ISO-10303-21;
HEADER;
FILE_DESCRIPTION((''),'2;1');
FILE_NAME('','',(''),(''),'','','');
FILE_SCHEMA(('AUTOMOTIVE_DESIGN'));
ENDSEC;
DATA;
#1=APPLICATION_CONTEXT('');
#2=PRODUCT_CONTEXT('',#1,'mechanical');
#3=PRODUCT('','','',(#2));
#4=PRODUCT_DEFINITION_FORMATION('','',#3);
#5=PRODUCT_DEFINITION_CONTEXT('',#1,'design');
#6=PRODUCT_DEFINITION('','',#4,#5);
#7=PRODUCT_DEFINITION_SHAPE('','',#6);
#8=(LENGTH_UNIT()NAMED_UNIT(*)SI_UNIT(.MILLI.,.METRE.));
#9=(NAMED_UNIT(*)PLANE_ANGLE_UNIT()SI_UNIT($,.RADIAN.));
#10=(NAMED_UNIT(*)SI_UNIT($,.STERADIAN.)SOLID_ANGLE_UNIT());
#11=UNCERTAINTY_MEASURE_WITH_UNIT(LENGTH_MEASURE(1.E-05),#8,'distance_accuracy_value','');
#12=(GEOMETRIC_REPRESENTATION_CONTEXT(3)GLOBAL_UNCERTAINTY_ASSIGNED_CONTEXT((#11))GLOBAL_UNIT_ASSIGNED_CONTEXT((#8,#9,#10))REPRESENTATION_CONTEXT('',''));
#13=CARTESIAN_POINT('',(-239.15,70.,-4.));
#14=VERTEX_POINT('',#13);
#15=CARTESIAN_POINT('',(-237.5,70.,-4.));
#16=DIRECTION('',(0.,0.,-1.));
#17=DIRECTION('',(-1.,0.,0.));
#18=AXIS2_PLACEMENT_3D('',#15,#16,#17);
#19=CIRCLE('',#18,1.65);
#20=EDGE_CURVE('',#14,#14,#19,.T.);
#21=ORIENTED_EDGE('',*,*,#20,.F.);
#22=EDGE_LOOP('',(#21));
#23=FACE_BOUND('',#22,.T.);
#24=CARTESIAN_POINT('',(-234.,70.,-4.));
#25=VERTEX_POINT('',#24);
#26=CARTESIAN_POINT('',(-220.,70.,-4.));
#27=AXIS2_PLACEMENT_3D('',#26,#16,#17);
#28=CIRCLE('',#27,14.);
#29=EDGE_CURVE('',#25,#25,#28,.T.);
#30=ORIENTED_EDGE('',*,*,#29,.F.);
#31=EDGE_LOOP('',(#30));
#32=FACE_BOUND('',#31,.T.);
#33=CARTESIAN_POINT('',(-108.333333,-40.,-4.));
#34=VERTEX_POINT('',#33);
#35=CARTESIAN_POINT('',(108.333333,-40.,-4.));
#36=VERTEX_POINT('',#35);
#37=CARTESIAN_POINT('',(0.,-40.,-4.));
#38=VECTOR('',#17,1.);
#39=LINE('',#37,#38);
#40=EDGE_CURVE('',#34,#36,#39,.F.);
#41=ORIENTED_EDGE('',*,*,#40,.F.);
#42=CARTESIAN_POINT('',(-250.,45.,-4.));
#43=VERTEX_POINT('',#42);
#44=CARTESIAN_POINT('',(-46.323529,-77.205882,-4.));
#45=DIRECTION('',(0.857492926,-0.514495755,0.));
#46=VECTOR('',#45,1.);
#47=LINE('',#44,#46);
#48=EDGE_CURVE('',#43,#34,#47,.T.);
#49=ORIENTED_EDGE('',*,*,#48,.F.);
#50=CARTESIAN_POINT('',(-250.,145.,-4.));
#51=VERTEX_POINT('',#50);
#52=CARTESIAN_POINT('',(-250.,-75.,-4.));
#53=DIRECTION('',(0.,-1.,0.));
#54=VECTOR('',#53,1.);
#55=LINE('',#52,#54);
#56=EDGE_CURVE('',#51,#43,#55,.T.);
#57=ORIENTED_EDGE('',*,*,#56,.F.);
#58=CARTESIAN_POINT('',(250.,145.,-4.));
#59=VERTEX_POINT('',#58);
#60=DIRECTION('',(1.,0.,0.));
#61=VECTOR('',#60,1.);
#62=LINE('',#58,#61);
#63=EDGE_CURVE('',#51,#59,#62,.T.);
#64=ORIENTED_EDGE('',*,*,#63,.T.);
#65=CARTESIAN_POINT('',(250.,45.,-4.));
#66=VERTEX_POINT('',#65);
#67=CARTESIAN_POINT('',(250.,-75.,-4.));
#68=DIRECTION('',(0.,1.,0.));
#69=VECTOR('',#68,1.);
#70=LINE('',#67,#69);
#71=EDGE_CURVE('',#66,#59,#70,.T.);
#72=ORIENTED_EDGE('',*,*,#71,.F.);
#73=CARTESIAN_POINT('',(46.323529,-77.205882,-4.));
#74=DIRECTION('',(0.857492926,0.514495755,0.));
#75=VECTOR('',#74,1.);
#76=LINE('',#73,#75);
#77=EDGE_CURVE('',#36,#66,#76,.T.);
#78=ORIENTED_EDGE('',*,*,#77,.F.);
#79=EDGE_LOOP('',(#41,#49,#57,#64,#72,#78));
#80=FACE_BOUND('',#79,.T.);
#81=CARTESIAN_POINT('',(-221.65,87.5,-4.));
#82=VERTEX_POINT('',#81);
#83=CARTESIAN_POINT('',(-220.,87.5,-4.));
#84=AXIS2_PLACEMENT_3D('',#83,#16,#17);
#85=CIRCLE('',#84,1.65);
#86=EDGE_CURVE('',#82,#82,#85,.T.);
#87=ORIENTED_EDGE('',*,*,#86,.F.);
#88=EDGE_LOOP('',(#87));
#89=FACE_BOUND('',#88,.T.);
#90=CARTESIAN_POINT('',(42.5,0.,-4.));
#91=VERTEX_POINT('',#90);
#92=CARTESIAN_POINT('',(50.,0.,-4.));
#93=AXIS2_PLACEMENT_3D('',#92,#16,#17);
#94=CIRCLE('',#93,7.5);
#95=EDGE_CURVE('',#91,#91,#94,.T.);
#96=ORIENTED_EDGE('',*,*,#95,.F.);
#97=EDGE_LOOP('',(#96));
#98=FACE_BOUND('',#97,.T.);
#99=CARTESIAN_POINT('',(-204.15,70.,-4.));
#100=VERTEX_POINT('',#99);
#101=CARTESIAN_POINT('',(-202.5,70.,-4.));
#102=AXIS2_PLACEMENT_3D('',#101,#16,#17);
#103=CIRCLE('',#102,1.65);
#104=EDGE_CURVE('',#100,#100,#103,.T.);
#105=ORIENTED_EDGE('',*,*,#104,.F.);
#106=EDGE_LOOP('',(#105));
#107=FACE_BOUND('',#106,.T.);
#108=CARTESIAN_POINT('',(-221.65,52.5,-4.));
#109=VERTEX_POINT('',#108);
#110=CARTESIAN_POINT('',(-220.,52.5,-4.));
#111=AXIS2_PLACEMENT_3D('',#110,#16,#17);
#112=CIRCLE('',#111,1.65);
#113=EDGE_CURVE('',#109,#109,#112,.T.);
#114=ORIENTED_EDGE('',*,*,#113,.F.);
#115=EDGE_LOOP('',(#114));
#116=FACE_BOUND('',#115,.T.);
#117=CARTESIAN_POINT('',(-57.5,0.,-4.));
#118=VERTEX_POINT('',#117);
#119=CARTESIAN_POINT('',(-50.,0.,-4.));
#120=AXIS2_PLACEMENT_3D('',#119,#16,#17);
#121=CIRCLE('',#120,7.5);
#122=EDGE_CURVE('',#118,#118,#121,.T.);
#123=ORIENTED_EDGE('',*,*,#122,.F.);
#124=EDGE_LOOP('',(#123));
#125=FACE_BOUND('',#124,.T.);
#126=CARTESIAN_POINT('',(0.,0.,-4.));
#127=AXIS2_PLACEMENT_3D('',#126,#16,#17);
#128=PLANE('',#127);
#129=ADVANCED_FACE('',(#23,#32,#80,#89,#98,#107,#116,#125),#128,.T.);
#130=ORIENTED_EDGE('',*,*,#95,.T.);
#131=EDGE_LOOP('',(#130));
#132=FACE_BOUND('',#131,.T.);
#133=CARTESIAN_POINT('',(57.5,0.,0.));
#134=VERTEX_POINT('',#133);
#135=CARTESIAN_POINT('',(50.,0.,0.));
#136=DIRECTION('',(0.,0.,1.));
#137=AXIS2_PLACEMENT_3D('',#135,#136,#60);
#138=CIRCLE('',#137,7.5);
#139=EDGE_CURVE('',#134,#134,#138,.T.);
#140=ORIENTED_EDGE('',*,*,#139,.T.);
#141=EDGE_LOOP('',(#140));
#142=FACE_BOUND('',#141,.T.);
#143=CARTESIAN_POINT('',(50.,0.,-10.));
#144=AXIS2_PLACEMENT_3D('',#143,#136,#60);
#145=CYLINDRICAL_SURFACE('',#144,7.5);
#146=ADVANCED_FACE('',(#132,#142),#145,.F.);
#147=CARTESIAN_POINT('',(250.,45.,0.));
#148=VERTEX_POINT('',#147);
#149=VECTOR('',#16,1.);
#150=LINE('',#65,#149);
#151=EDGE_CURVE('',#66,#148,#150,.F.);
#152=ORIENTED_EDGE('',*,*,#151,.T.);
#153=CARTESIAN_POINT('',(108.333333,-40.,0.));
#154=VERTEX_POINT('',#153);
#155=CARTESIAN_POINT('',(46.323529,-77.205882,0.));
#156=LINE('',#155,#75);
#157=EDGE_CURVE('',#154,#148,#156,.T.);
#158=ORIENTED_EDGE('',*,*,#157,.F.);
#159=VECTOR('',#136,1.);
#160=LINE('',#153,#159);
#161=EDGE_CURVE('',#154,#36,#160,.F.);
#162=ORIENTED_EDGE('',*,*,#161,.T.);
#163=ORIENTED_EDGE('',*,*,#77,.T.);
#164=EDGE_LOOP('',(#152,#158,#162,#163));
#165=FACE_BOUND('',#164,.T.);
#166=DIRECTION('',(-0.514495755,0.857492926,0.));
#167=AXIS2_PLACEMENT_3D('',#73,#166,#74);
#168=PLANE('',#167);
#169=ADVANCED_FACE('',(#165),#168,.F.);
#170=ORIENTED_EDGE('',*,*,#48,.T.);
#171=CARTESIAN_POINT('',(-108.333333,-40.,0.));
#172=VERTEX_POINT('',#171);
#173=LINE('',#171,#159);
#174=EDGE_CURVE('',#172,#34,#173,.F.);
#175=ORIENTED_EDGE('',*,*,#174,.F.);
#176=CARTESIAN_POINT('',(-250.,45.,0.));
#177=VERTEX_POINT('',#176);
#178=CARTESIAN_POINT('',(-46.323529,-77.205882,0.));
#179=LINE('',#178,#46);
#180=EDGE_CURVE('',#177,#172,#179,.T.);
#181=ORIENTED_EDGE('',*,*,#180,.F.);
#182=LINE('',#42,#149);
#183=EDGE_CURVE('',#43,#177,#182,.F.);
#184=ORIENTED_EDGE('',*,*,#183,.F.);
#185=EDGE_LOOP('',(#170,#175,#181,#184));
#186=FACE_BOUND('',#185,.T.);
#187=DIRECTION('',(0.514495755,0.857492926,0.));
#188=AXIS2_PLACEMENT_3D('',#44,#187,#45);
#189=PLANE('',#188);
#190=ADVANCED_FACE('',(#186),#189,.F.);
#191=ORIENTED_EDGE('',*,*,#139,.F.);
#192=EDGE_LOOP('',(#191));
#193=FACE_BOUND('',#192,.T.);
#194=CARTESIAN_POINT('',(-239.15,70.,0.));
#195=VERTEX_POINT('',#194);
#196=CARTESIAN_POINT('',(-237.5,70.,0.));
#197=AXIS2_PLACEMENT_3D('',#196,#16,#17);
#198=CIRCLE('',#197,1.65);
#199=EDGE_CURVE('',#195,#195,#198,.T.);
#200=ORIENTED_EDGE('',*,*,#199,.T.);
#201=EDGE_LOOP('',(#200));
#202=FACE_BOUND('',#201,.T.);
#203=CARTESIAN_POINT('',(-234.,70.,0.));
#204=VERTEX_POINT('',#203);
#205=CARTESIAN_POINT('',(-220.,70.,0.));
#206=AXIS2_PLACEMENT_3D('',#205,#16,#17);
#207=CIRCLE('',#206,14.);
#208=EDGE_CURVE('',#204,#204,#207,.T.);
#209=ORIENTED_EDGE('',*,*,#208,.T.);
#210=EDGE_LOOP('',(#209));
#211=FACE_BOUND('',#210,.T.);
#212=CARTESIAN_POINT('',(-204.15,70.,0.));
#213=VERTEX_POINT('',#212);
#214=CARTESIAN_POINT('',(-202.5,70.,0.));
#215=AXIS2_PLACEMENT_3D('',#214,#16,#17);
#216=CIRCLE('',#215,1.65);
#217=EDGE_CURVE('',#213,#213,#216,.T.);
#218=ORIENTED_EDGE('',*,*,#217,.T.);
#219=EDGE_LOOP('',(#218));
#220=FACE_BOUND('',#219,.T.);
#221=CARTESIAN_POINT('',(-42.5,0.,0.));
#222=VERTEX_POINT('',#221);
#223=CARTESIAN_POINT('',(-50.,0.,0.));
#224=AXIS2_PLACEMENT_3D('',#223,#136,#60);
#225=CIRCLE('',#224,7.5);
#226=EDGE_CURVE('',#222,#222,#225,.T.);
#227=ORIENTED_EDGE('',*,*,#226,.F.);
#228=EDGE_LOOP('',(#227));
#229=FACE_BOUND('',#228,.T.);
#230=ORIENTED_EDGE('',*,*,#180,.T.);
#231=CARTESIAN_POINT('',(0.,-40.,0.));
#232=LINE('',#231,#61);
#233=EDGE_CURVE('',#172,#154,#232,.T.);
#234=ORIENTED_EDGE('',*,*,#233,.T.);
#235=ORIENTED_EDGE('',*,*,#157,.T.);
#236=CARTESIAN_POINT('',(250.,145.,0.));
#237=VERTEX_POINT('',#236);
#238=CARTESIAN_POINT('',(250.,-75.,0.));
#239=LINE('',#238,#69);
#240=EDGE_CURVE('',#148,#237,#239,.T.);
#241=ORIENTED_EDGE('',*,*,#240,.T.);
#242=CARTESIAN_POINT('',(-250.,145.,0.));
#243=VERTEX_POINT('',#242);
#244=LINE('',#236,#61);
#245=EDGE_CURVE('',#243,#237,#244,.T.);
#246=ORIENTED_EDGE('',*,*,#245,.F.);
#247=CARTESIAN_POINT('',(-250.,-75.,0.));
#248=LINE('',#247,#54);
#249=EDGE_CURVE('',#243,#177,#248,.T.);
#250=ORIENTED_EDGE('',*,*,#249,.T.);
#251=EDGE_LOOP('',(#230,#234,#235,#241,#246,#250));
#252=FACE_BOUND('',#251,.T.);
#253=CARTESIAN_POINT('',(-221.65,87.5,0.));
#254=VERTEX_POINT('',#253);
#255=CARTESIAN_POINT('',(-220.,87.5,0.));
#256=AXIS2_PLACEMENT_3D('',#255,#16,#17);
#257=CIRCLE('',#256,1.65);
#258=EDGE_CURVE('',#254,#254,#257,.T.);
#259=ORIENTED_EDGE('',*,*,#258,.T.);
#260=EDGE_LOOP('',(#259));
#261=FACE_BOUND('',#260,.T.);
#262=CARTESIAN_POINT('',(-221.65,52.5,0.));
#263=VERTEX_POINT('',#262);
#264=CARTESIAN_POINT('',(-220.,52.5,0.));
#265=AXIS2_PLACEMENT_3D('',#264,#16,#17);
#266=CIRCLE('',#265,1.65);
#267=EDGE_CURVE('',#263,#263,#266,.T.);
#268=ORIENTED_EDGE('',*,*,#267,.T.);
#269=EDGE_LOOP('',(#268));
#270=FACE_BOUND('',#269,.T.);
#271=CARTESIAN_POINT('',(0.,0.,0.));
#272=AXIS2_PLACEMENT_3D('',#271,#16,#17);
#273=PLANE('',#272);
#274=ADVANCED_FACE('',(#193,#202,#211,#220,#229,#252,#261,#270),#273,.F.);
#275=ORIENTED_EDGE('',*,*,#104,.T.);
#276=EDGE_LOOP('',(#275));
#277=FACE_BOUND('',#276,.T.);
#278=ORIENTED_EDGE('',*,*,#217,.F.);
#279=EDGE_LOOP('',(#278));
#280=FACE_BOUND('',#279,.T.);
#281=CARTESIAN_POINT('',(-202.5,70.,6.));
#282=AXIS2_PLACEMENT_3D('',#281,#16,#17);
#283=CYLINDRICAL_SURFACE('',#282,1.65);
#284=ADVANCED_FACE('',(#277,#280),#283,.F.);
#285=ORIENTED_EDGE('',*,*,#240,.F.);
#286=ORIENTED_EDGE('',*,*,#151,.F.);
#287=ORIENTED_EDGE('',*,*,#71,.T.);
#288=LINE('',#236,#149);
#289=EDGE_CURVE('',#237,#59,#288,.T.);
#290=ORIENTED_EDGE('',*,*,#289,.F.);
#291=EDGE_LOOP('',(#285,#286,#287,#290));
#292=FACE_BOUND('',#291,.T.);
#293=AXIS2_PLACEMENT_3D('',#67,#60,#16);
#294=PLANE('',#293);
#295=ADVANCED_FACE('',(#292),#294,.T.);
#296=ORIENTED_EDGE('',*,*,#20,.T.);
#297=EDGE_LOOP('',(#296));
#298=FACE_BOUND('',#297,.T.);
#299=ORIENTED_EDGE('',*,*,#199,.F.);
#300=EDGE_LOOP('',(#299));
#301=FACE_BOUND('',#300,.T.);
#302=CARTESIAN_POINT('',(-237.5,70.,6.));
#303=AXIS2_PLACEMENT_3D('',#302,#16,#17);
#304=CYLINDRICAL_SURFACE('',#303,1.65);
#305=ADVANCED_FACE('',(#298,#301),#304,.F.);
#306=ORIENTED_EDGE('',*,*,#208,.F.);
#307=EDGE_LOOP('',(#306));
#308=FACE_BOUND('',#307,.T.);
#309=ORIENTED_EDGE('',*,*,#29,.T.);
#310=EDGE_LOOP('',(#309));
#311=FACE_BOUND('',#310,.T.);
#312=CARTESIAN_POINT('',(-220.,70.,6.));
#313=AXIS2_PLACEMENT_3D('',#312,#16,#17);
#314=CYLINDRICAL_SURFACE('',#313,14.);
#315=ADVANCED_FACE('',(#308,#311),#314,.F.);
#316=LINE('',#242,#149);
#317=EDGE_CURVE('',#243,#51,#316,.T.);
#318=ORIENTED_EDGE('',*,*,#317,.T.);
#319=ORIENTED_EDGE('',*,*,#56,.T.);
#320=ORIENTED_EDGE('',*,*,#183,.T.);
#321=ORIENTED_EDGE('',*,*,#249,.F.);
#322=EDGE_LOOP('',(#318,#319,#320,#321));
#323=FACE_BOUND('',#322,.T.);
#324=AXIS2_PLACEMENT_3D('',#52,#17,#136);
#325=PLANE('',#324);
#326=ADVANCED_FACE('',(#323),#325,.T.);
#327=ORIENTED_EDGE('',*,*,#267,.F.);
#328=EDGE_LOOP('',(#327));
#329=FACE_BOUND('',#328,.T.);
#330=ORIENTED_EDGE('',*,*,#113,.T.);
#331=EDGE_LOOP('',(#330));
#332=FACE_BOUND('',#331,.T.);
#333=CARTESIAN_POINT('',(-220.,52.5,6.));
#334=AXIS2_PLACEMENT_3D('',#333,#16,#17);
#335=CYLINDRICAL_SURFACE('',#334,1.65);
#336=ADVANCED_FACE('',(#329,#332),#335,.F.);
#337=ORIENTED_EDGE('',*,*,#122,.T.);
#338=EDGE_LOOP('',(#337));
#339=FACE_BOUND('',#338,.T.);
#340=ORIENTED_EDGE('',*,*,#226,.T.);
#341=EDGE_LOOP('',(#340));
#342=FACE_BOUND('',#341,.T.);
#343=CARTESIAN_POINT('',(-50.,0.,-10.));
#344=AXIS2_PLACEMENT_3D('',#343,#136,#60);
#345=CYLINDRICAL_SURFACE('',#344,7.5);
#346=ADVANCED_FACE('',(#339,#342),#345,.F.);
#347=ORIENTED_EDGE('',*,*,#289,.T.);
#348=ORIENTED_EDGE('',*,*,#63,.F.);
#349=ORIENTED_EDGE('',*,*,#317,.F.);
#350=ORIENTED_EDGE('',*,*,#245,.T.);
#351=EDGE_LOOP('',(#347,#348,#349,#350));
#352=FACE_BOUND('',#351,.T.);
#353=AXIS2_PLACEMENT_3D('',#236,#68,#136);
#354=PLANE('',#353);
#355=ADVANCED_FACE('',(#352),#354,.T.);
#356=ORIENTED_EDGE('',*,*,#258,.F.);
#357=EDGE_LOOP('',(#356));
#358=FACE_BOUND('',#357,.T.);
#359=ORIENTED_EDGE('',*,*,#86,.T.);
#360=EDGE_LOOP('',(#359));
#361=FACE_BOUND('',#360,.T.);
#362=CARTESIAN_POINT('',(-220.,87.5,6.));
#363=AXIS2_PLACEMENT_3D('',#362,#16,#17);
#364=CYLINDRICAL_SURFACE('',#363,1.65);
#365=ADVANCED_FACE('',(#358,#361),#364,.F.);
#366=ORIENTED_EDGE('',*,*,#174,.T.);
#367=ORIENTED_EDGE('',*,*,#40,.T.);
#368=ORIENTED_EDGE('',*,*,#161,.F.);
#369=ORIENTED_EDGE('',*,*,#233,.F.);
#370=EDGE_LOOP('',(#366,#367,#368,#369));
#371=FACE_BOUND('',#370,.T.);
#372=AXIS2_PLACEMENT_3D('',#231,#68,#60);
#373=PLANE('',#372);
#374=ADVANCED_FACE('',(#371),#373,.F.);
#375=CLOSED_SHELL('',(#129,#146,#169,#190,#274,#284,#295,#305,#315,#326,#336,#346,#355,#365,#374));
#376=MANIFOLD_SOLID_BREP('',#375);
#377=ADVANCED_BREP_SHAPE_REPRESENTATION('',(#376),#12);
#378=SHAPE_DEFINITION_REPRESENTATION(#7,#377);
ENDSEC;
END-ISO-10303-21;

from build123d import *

# Parameters (mm, degrees)
SKETCH_2_W             = 500
SKETCH_2_H             = 150
SM_BASE_FLANGE_1_DEPTH = 4
SKETCH_7_R             = 7.5
CUT_EXTRUDE_1_DEPTH    = 10
CUT_EXTRUDE_2_DEPTH    = 10
SKETCH_9_W             = 500
SKETCH_9_H             = 70
EXTRUDE_1_DEPTH        = 4
SKETCH_11_W            = 294.318295345
SKETCH_11_H            = 76.206928483
CUT_EXTRUDE_3_DEPTH    = 10
SKETCH_12_R            = 14
CUT_EXTRUDE_4_DEPTH    = 10
SKETCH_13_R            = 1.65
CUT_EXTRUDE_5_DEPTH    = 10


# Sheet-metal steps are written as plain solids
with BuildPart() as part:
    # Sketch 2 → 基体-法兰1 (new body)
    with BuildSketch(Plane.XY):
        Rectangle(SKETCH_2_W, SKETCH_2_H)
    extrude(amount=-SM_BASE_FLANGE_1_DEPTH)

    # 草图7 → 切除-拉伸1 (cut)
    with BuildSketch(Plane.XY):
        with Locations((-50, 0)):
            Circle(SKETCH_7_R)
        with Locations((50, 0)):
            Circle(SKETCH_7_R)
    extrude(amount=-CUT_EXTRUDE_1_DEPTH, mode=Mode.SUBTRACT)

    # 草图8 → 切除-拉伸2 (cut)
    with BuildSketch(Plane.XY):
        Polygon((250, 45), (50, -75), (250, -75), align=None)
        Polygon((-250, -75), (-250, 45), (-50, -75), align=None)
    extrude(amount=-CUT_EXTRUDE_2_DEPTH, mode=Mode.SUBTRACT)

    # 草图9 → 凸台-拉伸1 (add)
    with BuildSketch(Plane(origin=(0, 0, -4), x_dir=(-1, 0, 0), z_dir=(0, 0, -1))):
        with Locations((0, 110)):
            Rectangle(SKETCH_9_W, SKETCH_9_H)
    extrude(amount=-EXTRUDE_1_DEPTH)

    # 草图11 → 切除-拉伸3 (cut)
    with BuildSketch(Plane(origin=(0, 0, -4), x_dir=(-1, 0, 0), z_dir=(0, 0, -1))):
        with Locations((38.825814339, -78.103464242)):
            Rectangle(SKETCH_11_W, SKETCH_11_H)
    extrude(amount=-CUT_EXTRUDE_3_DEPTH, mode=Mode.SUBTRACT)

    # 草图12 → 切除-拉伸4 (cut)
    with BuildSketch(Plane(origin=(0, 0, -4), x_dir=(-1, 0, 0), z_dir=(0, 0, -1))):
        with Locations((220, 70)):
            Circle(SKETCH_12_R)
    extrude(amount=-CUT_EXTRUDE_4_DEPTH, mode=Mode.SUBTRACT)

    # 草图13 → 切除-拉伸5 (cut)
    with BuildSketch(Plane(origin=(0, 0, -4), x_dir=(-1, 0, 0), z_dir=(0, 0, -1))):
        with Locations((220, 87.5)):
            Circle(SKETCH_13_R)
        with Locations((237.5, 70)):
            Circle(SKETCH_13_R)
        with Locations((220, 52.5)):
            Circle(SKETCH_13_R)
        with Locations((202.5, 70)):
            Circle(SKETCH_13_R)
    extrude(amount=-CUT_EXTRUDE_5_DEPTH, mode=Mode.SUBTRACT)


solid = part.part
